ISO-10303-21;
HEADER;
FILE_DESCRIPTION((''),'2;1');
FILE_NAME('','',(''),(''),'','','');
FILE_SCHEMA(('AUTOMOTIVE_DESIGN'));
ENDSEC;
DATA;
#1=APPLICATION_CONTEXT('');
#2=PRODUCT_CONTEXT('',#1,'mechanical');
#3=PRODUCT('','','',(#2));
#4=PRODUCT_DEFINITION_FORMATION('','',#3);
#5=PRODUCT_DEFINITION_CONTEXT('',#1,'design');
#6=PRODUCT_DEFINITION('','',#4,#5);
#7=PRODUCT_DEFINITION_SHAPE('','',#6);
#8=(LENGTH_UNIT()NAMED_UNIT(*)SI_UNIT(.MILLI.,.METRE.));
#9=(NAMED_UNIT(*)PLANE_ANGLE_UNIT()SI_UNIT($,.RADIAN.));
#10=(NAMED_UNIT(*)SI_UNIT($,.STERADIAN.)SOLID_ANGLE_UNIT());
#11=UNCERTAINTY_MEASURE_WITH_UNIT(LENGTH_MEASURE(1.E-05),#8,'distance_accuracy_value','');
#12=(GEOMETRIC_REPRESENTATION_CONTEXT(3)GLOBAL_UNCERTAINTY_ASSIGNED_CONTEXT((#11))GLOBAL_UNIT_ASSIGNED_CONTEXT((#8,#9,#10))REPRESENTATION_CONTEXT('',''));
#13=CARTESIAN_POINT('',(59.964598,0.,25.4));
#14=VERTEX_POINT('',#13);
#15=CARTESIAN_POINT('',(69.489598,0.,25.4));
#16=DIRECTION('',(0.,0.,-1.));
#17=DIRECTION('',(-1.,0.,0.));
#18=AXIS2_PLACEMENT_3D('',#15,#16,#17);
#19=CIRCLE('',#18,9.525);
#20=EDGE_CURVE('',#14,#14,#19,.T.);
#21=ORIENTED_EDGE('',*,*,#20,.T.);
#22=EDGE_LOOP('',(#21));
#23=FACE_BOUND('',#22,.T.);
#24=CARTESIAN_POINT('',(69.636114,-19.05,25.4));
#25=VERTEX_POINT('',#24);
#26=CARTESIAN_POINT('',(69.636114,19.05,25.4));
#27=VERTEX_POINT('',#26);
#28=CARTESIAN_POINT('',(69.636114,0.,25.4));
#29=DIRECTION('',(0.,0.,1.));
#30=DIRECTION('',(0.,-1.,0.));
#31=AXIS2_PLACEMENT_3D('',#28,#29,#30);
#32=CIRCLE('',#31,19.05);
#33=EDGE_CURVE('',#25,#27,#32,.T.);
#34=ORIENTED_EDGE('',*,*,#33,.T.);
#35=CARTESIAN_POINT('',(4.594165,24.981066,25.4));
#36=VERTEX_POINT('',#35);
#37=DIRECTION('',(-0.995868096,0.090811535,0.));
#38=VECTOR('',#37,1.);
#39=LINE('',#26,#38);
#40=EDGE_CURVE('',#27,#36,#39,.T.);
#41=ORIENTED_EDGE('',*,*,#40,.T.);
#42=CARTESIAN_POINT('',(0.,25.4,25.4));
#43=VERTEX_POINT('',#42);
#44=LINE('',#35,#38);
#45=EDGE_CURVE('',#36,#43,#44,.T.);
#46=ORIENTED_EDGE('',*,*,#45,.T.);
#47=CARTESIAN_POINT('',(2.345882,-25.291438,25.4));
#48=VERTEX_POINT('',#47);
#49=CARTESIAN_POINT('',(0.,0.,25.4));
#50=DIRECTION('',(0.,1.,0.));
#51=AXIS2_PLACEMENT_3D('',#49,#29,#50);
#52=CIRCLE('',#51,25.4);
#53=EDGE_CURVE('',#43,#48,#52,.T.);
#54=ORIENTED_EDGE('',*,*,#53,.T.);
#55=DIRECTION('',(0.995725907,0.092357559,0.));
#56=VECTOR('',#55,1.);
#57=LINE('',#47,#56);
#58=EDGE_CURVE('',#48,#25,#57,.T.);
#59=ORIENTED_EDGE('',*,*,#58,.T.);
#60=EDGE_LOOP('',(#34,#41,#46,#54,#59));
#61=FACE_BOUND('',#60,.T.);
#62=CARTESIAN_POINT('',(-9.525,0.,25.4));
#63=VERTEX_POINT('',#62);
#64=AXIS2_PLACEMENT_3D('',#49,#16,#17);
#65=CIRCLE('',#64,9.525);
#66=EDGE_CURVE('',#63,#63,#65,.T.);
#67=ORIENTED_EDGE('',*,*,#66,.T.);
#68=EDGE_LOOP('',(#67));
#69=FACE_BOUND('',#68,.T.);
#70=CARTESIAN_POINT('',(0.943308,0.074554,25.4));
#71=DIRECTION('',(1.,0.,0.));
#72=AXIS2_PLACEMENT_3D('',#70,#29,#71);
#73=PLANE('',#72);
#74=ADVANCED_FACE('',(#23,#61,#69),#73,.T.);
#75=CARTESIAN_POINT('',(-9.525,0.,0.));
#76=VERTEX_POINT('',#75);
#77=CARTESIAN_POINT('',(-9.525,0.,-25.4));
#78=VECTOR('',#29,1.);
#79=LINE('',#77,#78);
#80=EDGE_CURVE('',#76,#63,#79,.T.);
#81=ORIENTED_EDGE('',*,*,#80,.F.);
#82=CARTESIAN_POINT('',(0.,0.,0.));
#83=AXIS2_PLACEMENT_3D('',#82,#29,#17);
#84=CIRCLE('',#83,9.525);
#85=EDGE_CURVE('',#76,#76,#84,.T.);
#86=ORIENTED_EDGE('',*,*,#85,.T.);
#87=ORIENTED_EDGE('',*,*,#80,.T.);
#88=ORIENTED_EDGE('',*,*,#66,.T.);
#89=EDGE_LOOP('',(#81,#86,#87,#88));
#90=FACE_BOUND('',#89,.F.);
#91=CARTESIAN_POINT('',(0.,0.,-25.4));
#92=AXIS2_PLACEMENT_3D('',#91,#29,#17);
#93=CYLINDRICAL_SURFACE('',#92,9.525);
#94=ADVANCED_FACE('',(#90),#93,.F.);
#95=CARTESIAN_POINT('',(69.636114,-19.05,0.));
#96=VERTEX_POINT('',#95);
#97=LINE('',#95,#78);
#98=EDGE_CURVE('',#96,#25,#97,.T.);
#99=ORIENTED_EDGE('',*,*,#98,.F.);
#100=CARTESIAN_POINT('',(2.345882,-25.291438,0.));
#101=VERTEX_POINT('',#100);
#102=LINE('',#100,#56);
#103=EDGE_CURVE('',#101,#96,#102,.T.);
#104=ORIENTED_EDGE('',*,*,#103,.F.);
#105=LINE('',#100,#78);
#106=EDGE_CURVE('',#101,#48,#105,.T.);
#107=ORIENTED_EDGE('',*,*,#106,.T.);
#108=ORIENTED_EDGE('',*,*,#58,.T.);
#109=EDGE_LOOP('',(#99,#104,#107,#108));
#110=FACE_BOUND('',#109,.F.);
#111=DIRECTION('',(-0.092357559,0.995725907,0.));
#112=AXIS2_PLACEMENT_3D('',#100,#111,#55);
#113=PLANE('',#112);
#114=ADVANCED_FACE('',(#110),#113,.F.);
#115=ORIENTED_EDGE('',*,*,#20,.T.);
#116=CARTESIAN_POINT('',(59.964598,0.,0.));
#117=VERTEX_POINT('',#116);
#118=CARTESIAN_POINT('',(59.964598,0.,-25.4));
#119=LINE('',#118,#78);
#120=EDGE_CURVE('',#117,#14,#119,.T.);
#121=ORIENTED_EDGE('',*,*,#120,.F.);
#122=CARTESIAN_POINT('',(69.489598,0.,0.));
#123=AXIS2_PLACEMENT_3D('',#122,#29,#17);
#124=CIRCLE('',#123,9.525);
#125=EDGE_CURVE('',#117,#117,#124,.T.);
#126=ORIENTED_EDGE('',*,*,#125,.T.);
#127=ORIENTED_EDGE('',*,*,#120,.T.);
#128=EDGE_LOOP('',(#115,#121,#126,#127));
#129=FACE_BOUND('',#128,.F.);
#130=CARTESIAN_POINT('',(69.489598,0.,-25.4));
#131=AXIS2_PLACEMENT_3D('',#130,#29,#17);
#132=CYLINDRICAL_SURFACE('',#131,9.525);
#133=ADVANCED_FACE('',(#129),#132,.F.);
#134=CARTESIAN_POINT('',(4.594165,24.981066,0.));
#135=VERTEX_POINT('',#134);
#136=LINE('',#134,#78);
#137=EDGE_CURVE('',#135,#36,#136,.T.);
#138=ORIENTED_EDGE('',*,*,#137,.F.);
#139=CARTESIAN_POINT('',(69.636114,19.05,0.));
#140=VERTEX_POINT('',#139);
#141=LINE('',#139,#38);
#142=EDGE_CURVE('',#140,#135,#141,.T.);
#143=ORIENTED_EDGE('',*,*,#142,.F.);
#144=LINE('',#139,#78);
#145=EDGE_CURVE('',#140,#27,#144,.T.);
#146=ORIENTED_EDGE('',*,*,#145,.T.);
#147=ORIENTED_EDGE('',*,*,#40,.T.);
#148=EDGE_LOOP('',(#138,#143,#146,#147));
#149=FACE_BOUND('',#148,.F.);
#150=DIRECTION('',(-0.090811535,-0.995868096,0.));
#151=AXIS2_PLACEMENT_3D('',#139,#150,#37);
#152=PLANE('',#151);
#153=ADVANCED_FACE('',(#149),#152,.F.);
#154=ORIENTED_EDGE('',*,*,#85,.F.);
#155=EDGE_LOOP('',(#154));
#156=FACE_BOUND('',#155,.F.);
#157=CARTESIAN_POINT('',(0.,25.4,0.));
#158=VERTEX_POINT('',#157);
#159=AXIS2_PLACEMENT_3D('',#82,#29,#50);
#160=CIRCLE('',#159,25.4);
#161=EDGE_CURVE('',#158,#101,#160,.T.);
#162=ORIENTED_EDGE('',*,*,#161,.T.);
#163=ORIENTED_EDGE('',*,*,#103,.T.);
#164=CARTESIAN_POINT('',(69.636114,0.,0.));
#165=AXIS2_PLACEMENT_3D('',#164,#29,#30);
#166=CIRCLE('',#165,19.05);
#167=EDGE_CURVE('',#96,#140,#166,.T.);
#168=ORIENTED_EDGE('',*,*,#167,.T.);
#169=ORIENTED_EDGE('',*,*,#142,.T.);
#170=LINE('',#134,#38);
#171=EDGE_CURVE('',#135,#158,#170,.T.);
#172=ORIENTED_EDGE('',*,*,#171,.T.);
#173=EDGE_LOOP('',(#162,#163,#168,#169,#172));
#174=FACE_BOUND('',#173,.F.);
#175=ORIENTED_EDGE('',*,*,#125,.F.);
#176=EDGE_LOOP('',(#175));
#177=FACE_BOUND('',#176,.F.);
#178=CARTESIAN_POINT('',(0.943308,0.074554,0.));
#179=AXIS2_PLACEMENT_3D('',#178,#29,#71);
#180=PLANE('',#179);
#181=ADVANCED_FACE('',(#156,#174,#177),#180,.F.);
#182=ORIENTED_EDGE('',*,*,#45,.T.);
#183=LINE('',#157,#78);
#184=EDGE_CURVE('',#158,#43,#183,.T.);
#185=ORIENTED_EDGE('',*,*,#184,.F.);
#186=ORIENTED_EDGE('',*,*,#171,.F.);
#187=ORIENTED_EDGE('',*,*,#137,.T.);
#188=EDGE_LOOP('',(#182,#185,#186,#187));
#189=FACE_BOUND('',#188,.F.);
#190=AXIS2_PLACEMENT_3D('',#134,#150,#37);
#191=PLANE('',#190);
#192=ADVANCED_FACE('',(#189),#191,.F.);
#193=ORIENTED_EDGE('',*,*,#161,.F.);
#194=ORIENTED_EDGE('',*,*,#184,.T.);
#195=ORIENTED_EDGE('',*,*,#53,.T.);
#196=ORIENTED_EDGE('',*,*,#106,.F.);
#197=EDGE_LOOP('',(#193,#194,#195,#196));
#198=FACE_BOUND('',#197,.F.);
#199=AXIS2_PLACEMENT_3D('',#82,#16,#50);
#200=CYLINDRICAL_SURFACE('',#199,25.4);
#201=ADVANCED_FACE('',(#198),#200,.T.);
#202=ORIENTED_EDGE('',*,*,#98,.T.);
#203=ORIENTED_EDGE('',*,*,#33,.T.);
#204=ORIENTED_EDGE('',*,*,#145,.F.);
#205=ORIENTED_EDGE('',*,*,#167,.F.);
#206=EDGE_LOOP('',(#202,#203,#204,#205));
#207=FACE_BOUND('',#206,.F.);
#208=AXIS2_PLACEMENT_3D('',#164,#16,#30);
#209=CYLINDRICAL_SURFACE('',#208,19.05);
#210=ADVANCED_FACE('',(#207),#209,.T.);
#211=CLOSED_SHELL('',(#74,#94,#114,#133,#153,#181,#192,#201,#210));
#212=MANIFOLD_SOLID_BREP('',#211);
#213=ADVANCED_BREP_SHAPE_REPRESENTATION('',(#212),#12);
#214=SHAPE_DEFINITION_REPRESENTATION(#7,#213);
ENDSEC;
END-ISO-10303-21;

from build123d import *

# Parameters (mm, degrees)
F2_DEPTH = 25.4
F3_D     = 19.05
F3_DEPTH = 25.4
F3_TIP   = 5.7231973962


with BuildPart() as f2:
    # F0 (on Top) → F2 (new body)
    with BuildSketch(Plane.XY):
        with BuildLine():
            ThreePointArc((2.3458816171, -25.2914380658), (18.7715928077, -17.1110287085), (25.4, 0))
            ThreePointArc((25.4, 0), (19.5173228231, 16.2552794445), (4.5941645813, 24.981065866))
            Line((4.5941645813, 24.981065866), (0, 25.4))
            ThreePointArc((0, 25.4), (-25.3728450008, -1.1741961351), (2.3458816171, -25.2914380658))
        make_face()
        with BuildLine():
            ThreePointArc((4.5941645813, 24.981065866), (19.5173228231, 16.2552794445), (25.4, 0))
            ThreePointArc((25.4, 0), (18.7715928077, -17.1110287085), (2.3458816171, -25.2914380658))
            Line((2.3458816171, -25.2914380658), (69.6361139417, -19.05))
            ThreePointArc((69.6361139417, -19.05), (50.5861139417, 0), (69.6361139417, 19.05))
            Line((69.6361139417, 19.05), (4.5941645813, 24.981065866))
        make_face()
        with BuildLine():
            ThreePointArc((88.6861139417, 0), (83.1064981233, 13.4703841816), (69.6361139417, 19.05))
            ThreePointArc((69.6361139417, 19.05), (50.5861139417, 0), (69.6361139417, -19.05))
            ThreePointArc((69.6361139417, -19.05), (83.1064981233, -13.4703841816), (88.6861139417, 0))
        make_face()
    extrude(amount=F2_DEPTH)

    # F3
    with Locations(Plane(origin=(0, 0, 0), x_dir=(1, 0, 0), z_dir=(0, 0, -1))):
        with Locations((0, 0), (69.4895982742, 0)):
            Hole(F3_D / 2, depth=F3_DEPTH)
            with Locations((0, 0, -(F3_DEPTH + F3_TIP / 2))):  # 118° drill point
                Cone(0, F3_D / 2, F3_TIP, mode=Mode.SUBTRACT)


solid = f2.part
